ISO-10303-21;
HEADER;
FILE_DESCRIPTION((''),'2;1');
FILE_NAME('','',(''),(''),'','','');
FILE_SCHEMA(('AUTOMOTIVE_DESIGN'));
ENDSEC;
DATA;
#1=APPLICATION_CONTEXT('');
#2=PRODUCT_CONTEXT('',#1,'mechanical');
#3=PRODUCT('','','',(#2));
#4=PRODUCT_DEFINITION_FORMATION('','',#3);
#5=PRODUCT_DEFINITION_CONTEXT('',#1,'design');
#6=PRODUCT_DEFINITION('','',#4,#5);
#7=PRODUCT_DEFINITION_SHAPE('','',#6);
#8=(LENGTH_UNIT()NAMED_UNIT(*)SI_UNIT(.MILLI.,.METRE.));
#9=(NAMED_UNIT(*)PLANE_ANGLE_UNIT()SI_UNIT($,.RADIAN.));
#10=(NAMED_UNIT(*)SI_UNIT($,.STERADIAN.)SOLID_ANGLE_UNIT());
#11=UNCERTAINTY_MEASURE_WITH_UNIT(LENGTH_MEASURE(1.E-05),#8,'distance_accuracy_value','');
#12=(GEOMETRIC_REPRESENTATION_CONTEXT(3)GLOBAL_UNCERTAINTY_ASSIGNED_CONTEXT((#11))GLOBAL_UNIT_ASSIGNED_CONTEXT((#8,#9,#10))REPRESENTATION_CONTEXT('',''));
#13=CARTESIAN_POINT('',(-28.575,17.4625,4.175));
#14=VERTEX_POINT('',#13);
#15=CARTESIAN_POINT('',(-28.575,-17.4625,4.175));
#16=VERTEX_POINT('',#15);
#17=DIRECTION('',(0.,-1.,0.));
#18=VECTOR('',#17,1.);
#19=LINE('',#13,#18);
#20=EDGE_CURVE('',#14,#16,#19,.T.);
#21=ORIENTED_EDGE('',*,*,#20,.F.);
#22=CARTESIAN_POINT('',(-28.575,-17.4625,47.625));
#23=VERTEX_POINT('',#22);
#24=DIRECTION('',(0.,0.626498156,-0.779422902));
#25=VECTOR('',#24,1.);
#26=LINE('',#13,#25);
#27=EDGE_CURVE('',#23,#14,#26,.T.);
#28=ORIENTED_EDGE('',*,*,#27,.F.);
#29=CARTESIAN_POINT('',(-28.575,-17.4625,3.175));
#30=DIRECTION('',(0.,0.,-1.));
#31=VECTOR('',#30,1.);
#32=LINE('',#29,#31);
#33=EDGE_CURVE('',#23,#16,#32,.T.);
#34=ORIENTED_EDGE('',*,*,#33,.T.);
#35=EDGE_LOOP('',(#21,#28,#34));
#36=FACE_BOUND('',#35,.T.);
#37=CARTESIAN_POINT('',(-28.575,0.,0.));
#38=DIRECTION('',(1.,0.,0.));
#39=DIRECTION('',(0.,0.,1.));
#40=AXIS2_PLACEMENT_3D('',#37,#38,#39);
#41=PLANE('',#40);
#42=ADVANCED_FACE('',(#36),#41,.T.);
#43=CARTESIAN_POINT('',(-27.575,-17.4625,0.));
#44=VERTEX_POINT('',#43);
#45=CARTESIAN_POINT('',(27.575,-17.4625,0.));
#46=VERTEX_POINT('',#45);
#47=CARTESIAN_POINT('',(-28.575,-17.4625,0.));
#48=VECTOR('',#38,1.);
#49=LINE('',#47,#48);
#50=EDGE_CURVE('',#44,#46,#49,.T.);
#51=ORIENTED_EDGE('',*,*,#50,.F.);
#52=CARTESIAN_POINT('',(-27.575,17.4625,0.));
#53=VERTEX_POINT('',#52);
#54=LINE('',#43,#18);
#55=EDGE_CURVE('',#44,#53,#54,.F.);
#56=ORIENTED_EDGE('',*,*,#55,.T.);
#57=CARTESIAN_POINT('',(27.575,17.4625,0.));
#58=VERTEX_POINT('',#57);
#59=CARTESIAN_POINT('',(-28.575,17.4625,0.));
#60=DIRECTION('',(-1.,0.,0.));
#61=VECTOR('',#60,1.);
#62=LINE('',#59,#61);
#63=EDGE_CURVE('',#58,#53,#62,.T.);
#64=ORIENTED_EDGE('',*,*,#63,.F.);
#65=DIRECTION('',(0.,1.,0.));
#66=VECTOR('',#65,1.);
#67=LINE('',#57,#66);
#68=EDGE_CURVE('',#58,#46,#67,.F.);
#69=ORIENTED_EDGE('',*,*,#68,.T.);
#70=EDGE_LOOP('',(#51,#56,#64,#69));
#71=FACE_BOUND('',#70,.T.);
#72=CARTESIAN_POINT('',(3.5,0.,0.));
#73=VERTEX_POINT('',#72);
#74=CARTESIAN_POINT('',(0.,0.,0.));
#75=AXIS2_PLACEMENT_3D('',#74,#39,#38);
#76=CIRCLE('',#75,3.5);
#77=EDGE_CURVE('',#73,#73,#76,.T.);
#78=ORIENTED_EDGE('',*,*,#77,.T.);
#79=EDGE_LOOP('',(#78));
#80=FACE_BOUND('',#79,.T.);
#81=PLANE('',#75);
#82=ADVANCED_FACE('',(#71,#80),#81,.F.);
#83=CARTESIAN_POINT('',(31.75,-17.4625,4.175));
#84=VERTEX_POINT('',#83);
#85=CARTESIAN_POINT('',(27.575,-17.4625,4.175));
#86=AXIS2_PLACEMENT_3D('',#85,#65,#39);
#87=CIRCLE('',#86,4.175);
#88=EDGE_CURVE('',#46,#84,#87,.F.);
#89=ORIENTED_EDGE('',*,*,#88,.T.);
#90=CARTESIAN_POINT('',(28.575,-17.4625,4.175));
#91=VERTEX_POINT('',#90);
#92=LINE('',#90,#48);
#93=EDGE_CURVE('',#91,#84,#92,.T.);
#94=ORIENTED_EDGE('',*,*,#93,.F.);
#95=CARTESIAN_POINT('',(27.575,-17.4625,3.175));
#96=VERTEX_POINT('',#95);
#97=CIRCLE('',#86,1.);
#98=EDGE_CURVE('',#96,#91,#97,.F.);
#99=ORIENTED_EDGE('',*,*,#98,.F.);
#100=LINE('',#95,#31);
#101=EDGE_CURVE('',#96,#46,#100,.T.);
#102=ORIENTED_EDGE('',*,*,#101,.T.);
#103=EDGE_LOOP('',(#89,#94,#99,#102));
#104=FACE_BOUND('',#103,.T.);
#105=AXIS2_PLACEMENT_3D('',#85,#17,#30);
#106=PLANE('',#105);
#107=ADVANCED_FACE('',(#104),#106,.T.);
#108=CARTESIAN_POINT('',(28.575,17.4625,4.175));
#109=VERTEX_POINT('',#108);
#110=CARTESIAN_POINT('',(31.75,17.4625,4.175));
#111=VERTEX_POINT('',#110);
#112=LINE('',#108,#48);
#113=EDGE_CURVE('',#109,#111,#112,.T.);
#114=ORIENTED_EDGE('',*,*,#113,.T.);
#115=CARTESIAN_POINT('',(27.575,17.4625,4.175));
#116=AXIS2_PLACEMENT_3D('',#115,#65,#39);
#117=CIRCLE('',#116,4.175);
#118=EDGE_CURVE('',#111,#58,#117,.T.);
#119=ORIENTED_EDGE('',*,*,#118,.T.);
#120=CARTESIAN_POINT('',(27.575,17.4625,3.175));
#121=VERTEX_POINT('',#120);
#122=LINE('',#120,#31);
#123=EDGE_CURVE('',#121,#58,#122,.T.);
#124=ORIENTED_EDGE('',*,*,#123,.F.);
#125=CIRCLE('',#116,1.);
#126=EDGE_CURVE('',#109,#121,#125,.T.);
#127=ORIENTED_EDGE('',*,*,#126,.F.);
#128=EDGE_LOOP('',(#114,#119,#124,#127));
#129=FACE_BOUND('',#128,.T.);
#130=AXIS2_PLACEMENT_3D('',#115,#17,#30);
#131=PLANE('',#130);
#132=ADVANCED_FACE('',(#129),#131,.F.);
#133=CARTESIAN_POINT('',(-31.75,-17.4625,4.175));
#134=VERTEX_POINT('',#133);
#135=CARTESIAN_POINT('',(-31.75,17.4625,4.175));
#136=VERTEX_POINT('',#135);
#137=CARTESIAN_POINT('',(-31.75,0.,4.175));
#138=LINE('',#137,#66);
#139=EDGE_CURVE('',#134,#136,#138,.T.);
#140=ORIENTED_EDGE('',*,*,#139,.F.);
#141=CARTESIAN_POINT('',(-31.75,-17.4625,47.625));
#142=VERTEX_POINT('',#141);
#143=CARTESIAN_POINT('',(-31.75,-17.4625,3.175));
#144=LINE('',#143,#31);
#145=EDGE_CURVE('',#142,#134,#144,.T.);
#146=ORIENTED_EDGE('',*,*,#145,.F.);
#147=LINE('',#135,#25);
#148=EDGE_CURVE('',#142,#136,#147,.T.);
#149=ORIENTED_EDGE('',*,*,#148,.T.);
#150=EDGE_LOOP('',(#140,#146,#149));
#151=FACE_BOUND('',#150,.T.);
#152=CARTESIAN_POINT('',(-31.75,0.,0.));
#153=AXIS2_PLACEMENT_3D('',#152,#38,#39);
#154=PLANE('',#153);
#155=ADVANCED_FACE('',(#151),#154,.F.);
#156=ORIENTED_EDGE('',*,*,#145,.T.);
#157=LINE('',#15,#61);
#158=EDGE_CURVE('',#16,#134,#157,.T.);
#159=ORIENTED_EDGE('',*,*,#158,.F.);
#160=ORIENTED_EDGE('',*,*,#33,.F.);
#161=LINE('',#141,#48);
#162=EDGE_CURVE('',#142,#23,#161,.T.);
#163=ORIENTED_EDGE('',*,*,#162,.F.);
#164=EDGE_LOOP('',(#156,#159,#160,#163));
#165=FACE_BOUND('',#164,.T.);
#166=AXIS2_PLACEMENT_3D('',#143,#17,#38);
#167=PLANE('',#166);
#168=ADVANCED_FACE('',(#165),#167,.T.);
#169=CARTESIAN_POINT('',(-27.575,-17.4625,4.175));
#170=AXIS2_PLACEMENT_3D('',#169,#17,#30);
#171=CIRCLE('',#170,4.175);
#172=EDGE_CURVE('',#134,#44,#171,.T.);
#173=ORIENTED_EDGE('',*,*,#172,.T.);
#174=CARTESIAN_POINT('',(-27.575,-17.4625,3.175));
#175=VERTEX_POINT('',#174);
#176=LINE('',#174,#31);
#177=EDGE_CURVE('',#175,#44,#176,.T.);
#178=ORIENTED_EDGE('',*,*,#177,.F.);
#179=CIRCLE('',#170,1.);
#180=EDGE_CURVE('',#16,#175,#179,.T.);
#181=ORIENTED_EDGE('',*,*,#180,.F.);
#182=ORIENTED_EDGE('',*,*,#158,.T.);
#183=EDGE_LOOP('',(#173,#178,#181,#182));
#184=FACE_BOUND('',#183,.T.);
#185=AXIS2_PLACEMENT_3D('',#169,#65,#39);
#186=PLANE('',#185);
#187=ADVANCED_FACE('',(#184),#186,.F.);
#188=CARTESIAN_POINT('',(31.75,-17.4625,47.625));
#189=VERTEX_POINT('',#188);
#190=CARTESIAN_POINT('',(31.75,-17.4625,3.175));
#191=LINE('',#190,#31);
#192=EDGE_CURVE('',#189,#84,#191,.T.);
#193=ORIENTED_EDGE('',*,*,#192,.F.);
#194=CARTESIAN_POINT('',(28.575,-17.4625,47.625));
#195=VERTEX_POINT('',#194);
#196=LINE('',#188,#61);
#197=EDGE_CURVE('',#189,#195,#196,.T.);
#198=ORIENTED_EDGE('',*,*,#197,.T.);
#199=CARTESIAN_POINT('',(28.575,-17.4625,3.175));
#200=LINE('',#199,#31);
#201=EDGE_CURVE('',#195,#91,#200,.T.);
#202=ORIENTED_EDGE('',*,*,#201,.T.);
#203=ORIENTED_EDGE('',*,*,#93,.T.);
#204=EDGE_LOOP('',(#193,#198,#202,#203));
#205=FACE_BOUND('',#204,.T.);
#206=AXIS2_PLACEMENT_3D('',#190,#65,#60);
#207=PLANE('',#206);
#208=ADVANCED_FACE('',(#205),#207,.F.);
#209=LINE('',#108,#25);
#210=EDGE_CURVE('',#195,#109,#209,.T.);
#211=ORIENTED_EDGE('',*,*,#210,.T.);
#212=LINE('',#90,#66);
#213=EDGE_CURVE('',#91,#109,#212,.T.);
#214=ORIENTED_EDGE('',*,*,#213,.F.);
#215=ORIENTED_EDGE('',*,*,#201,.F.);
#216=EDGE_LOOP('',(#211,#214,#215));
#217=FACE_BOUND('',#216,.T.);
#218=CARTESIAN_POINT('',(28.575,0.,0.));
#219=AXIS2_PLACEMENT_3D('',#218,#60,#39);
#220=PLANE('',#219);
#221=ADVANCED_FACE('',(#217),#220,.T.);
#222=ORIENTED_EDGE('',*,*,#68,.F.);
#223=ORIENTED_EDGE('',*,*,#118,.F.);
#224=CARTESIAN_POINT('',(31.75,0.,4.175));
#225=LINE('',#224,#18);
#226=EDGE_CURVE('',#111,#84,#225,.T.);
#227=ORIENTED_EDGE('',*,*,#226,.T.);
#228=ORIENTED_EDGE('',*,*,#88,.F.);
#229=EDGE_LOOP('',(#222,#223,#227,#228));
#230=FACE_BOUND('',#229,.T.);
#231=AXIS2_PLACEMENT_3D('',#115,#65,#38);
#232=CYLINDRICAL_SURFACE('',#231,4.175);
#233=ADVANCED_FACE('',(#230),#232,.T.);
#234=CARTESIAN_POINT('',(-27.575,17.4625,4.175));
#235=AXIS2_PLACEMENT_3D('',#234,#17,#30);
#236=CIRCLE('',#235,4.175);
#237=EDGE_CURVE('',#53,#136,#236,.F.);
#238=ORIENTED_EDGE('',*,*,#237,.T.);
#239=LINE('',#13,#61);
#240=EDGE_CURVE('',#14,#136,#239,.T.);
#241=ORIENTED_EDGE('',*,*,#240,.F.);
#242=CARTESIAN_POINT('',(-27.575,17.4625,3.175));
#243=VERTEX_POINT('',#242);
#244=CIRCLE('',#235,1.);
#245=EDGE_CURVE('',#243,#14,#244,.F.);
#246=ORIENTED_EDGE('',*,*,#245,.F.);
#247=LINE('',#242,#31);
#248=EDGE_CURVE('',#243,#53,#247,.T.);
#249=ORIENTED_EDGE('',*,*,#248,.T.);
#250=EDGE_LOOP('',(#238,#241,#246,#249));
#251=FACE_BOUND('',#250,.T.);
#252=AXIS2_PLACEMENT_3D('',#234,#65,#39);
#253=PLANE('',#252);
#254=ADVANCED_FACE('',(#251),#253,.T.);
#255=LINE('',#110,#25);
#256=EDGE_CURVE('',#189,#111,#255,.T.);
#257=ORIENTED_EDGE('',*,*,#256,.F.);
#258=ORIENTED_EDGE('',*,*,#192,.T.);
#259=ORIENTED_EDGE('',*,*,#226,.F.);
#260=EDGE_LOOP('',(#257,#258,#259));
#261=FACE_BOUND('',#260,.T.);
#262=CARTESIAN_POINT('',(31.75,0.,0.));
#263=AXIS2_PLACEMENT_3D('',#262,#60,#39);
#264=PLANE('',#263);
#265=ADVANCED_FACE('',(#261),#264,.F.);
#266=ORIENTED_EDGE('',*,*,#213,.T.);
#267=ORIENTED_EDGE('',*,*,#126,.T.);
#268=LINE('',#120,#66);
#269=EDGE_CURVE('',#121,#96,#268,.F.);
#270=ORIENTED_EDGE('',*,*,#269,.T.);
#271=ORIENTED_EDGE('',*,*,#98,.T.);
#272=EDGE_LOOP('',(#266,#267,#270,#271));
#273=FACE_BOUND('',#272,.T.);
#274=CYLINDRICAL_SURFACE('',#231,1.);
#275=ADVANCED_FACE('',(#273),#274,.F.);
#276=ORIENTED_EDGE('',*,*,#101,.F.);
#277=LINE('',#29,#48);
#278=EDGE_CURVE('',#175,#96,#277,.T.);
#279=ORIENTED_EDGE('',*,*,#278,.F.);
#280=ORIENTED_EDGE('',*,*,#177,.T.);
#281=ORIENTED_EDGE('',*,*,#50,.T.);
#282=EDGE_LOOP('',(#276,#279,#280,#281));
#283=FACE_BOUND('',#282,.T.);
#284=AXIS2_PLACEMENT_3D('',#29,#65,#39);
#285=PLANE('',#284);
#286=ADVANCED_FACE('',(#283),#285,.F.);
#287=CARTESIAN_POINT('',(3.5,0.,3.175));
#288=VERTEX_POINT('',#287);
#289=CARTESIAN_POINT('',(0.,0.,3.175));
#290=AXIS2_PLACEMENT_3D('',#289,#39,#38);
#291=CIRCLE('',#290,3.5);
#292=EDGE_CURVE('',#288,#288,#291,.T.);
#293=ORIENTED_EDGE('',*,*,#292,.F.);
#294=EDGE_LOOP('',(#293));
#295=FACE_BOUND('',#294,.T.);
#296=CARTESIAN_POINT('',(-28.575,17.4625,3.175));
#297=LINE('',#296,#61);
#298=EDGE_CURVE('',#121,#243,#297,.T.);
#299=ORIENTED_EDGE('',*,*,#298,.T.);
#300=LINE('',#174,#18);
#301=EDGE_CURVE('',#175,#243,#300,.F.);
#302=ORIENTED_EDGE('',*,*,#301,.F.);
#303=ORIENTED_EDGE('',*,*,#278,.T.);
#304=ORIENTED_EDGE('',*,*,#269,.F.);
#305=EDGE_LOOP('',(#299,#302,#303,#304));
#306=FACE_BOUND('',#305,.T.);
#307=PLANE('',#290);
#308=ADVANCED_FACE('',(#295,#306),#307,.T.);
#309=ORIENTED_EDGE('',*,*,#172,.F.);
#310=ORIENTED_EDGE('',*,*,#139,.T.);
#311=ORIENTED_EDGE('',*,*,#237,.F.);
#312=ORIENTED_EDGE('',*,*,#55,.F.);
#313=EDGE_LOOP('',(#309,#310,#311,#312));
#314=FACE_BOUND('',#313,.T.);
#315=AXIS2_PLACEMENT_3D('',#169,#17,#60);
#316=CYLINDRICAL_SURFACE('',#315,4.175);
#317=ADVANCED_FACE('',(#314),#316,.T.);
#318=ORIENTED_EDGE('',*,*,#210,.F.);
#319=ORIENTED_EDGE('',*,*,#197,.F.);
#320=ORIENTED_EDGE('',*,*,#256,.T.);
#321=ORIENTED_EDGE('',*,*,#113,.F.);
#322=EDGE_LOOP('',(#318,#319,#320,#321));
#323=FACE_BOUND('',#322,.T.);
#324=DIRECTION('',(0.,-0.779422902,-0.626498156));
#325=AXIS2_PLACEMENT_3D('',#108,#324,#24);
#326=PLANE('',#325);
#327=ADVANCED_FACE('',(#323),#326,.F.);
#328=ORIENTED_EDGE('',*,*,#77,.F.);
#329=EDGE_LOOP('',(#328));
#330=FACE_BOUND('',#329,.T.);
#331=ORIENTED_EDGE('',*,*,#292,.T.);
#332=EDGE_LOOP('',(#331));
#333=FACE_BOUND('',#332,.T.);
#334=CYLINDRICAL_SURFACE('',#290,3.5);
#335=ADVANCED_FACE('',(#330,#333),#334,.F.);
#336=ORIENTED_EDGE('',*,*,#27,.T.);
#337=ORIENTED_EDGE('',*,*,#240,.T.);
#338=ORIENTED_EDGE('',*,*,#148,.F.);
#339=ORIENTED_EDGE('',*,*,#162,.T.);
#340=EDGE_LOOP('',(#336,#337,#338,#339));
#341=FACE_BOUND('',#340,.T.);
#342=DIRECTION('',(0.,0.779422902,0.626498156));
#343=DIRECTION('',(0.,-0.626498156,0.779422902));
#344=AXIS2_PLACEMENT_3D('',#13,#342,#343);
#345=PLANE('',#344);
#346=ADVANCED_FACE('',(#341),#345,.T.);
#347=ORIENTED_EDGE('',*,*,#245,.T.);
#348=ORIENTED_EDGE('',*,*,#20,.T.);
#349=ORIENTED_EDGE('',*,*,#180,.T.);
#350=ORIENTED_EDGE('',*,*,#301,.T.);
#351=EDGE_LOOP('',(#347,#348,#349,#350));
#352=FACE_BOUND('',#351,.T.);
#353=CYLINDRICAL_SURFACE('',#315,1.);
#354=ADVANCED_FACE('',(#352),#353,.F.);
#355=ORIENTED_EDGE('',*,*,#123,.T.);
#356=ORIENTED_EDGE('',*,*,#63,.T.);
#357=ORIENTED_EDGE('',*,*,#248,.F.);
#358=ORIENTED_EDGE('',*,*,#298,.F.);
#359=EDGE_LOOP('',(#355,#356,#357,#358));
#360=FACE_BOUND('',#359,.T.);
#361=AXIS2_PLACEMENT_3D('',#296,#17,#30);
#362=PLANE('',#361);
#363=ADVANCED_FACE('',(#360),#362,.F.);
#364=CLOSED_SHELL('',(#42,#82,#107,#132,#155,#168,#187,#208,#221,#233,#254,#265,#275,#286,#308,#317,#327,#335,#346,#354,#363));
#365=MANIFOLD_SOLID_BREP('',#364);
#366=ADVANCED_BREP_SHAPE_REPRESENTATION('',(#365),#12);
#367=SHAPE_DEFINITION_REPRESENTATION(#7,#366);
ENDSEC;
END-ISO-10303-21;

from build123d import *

# Parameters (mm, degrees)
SKETCH2_W                    = 57.15
SKETCH2_H                    = 34.925
BASE_FLANGE1_DEPTH           = 3.175
EDGE_FLANGE1_STRIP_W         = 14.7
EDGE_FLANGE1_STRIP_H         = 3.175
EDGE_FLANGE1_STRIP_CUT_DEPTH = 34.925
EDGE_FLANGE1_DEPTH           = 34.925
CUT_EXTRUDE1_DEPTH           = 3.175
M6_CLEARANCE_HOLE1_D         = 7


# Sheet-metal steps are written as plain solids
with BuildPart() as part:
    # Sketch2 → Base-Flange1 (new body)
    with BuildSketch(Plane.XY):
        Rectangle(SKETCH2_W, SKETCH2_H)
    extrude(amount=BASE_FLANGE1_DEPTH)

    # Edge-Flange1 strip (across the edge) → Edge-Flange1 strip cut (cut)
    with BuildSketch(Plane(origin=(28.575, -17.4625, 3.175), x_dir=(-1, 0, 0), z_dir=(0, 1, 0))):
        with Locations((-6.35, -1.5875)):
            Rectangle(EDGE_FLANGE1_STRIP_W, EDGE_FLANGE1_STRIP_H)
    edge_flange1_strip_cut = extrude(amount=EDGE_FLANGE1_STRIP_CUT_DEPTH, mode=Mode.SUBTRACT)

    # Edge-Flange1 section (across the edge) → Edge-Flange1 (add)
    with BuildSketch(Plane(origin=(28.575, -17.4625, 3.175), x_dir=(-1, 0, 0), z_dir=(0, 1, 0))):
        with BuildLine():
            Line((-3.175, 1), (-3.175, 44.45))
            Line((-3.175, 44.45), (0, 44.45))
            Line((0, 44.45), (0, 1))
            ThreePointArc((0, 1), (0.292893219, 0.292893219), (1, 0))
            Line((1, 0), (1, -3.175))
            ThreePointArc((1, -3.175), (-1.952170811, -1.952170811), (-3.175, 1))
        make_face()
    edge_flange1 = extrude(amount=EDGE_FLANGE1_DEPTH)

    # Sketch10 → Cut-Extrude1 (cut)
    with BuildSketch(Plane(origin=(31.75, 0, 0), x_dir=(0, 0, -1), z_dir=(1, 0, 0))):
        Polygon((-4.175, 17.4625), (-47.625, -17.4625), (-47.625, 17.4625), align=None)
    cut_extrude1 = extrude(amount=-CUT_EXTRUDE1_DEPTH, mode=Mode.SUBTRACT)

    # Mirror1: Edge-Flange1 strip cut, Edge-Flange1, Cut-Extrude1 across plane
    add(edge_flange1_strip_cut.mirror(Plane(origin=(0, 0, 0), x_dir=(0, 0, 1), z_dir=(1, 0, 0))), mode=Mode.SUBTRACT)
    add(edge_flange1.mirror(Plane(origin=(0, 0, 0), x_dir=(0, 0, 1), z_dir=(1, 0, 0))))
    add(cut_extrude1.mirror(Plane(origin=(0, 0, 0), x_dir=(0, 0, 1), z_dir=(1, 0, 0))), mode=Mode.SUBTRACT)

    # M6 Clearance Hole1 (through all)
    with Locations(Plane.XY.offset(3.175)):
        with Locations((0, 0)):
            Hole(M6_CLEARANCE_HOLE1_D / 2)


solid = part.part
